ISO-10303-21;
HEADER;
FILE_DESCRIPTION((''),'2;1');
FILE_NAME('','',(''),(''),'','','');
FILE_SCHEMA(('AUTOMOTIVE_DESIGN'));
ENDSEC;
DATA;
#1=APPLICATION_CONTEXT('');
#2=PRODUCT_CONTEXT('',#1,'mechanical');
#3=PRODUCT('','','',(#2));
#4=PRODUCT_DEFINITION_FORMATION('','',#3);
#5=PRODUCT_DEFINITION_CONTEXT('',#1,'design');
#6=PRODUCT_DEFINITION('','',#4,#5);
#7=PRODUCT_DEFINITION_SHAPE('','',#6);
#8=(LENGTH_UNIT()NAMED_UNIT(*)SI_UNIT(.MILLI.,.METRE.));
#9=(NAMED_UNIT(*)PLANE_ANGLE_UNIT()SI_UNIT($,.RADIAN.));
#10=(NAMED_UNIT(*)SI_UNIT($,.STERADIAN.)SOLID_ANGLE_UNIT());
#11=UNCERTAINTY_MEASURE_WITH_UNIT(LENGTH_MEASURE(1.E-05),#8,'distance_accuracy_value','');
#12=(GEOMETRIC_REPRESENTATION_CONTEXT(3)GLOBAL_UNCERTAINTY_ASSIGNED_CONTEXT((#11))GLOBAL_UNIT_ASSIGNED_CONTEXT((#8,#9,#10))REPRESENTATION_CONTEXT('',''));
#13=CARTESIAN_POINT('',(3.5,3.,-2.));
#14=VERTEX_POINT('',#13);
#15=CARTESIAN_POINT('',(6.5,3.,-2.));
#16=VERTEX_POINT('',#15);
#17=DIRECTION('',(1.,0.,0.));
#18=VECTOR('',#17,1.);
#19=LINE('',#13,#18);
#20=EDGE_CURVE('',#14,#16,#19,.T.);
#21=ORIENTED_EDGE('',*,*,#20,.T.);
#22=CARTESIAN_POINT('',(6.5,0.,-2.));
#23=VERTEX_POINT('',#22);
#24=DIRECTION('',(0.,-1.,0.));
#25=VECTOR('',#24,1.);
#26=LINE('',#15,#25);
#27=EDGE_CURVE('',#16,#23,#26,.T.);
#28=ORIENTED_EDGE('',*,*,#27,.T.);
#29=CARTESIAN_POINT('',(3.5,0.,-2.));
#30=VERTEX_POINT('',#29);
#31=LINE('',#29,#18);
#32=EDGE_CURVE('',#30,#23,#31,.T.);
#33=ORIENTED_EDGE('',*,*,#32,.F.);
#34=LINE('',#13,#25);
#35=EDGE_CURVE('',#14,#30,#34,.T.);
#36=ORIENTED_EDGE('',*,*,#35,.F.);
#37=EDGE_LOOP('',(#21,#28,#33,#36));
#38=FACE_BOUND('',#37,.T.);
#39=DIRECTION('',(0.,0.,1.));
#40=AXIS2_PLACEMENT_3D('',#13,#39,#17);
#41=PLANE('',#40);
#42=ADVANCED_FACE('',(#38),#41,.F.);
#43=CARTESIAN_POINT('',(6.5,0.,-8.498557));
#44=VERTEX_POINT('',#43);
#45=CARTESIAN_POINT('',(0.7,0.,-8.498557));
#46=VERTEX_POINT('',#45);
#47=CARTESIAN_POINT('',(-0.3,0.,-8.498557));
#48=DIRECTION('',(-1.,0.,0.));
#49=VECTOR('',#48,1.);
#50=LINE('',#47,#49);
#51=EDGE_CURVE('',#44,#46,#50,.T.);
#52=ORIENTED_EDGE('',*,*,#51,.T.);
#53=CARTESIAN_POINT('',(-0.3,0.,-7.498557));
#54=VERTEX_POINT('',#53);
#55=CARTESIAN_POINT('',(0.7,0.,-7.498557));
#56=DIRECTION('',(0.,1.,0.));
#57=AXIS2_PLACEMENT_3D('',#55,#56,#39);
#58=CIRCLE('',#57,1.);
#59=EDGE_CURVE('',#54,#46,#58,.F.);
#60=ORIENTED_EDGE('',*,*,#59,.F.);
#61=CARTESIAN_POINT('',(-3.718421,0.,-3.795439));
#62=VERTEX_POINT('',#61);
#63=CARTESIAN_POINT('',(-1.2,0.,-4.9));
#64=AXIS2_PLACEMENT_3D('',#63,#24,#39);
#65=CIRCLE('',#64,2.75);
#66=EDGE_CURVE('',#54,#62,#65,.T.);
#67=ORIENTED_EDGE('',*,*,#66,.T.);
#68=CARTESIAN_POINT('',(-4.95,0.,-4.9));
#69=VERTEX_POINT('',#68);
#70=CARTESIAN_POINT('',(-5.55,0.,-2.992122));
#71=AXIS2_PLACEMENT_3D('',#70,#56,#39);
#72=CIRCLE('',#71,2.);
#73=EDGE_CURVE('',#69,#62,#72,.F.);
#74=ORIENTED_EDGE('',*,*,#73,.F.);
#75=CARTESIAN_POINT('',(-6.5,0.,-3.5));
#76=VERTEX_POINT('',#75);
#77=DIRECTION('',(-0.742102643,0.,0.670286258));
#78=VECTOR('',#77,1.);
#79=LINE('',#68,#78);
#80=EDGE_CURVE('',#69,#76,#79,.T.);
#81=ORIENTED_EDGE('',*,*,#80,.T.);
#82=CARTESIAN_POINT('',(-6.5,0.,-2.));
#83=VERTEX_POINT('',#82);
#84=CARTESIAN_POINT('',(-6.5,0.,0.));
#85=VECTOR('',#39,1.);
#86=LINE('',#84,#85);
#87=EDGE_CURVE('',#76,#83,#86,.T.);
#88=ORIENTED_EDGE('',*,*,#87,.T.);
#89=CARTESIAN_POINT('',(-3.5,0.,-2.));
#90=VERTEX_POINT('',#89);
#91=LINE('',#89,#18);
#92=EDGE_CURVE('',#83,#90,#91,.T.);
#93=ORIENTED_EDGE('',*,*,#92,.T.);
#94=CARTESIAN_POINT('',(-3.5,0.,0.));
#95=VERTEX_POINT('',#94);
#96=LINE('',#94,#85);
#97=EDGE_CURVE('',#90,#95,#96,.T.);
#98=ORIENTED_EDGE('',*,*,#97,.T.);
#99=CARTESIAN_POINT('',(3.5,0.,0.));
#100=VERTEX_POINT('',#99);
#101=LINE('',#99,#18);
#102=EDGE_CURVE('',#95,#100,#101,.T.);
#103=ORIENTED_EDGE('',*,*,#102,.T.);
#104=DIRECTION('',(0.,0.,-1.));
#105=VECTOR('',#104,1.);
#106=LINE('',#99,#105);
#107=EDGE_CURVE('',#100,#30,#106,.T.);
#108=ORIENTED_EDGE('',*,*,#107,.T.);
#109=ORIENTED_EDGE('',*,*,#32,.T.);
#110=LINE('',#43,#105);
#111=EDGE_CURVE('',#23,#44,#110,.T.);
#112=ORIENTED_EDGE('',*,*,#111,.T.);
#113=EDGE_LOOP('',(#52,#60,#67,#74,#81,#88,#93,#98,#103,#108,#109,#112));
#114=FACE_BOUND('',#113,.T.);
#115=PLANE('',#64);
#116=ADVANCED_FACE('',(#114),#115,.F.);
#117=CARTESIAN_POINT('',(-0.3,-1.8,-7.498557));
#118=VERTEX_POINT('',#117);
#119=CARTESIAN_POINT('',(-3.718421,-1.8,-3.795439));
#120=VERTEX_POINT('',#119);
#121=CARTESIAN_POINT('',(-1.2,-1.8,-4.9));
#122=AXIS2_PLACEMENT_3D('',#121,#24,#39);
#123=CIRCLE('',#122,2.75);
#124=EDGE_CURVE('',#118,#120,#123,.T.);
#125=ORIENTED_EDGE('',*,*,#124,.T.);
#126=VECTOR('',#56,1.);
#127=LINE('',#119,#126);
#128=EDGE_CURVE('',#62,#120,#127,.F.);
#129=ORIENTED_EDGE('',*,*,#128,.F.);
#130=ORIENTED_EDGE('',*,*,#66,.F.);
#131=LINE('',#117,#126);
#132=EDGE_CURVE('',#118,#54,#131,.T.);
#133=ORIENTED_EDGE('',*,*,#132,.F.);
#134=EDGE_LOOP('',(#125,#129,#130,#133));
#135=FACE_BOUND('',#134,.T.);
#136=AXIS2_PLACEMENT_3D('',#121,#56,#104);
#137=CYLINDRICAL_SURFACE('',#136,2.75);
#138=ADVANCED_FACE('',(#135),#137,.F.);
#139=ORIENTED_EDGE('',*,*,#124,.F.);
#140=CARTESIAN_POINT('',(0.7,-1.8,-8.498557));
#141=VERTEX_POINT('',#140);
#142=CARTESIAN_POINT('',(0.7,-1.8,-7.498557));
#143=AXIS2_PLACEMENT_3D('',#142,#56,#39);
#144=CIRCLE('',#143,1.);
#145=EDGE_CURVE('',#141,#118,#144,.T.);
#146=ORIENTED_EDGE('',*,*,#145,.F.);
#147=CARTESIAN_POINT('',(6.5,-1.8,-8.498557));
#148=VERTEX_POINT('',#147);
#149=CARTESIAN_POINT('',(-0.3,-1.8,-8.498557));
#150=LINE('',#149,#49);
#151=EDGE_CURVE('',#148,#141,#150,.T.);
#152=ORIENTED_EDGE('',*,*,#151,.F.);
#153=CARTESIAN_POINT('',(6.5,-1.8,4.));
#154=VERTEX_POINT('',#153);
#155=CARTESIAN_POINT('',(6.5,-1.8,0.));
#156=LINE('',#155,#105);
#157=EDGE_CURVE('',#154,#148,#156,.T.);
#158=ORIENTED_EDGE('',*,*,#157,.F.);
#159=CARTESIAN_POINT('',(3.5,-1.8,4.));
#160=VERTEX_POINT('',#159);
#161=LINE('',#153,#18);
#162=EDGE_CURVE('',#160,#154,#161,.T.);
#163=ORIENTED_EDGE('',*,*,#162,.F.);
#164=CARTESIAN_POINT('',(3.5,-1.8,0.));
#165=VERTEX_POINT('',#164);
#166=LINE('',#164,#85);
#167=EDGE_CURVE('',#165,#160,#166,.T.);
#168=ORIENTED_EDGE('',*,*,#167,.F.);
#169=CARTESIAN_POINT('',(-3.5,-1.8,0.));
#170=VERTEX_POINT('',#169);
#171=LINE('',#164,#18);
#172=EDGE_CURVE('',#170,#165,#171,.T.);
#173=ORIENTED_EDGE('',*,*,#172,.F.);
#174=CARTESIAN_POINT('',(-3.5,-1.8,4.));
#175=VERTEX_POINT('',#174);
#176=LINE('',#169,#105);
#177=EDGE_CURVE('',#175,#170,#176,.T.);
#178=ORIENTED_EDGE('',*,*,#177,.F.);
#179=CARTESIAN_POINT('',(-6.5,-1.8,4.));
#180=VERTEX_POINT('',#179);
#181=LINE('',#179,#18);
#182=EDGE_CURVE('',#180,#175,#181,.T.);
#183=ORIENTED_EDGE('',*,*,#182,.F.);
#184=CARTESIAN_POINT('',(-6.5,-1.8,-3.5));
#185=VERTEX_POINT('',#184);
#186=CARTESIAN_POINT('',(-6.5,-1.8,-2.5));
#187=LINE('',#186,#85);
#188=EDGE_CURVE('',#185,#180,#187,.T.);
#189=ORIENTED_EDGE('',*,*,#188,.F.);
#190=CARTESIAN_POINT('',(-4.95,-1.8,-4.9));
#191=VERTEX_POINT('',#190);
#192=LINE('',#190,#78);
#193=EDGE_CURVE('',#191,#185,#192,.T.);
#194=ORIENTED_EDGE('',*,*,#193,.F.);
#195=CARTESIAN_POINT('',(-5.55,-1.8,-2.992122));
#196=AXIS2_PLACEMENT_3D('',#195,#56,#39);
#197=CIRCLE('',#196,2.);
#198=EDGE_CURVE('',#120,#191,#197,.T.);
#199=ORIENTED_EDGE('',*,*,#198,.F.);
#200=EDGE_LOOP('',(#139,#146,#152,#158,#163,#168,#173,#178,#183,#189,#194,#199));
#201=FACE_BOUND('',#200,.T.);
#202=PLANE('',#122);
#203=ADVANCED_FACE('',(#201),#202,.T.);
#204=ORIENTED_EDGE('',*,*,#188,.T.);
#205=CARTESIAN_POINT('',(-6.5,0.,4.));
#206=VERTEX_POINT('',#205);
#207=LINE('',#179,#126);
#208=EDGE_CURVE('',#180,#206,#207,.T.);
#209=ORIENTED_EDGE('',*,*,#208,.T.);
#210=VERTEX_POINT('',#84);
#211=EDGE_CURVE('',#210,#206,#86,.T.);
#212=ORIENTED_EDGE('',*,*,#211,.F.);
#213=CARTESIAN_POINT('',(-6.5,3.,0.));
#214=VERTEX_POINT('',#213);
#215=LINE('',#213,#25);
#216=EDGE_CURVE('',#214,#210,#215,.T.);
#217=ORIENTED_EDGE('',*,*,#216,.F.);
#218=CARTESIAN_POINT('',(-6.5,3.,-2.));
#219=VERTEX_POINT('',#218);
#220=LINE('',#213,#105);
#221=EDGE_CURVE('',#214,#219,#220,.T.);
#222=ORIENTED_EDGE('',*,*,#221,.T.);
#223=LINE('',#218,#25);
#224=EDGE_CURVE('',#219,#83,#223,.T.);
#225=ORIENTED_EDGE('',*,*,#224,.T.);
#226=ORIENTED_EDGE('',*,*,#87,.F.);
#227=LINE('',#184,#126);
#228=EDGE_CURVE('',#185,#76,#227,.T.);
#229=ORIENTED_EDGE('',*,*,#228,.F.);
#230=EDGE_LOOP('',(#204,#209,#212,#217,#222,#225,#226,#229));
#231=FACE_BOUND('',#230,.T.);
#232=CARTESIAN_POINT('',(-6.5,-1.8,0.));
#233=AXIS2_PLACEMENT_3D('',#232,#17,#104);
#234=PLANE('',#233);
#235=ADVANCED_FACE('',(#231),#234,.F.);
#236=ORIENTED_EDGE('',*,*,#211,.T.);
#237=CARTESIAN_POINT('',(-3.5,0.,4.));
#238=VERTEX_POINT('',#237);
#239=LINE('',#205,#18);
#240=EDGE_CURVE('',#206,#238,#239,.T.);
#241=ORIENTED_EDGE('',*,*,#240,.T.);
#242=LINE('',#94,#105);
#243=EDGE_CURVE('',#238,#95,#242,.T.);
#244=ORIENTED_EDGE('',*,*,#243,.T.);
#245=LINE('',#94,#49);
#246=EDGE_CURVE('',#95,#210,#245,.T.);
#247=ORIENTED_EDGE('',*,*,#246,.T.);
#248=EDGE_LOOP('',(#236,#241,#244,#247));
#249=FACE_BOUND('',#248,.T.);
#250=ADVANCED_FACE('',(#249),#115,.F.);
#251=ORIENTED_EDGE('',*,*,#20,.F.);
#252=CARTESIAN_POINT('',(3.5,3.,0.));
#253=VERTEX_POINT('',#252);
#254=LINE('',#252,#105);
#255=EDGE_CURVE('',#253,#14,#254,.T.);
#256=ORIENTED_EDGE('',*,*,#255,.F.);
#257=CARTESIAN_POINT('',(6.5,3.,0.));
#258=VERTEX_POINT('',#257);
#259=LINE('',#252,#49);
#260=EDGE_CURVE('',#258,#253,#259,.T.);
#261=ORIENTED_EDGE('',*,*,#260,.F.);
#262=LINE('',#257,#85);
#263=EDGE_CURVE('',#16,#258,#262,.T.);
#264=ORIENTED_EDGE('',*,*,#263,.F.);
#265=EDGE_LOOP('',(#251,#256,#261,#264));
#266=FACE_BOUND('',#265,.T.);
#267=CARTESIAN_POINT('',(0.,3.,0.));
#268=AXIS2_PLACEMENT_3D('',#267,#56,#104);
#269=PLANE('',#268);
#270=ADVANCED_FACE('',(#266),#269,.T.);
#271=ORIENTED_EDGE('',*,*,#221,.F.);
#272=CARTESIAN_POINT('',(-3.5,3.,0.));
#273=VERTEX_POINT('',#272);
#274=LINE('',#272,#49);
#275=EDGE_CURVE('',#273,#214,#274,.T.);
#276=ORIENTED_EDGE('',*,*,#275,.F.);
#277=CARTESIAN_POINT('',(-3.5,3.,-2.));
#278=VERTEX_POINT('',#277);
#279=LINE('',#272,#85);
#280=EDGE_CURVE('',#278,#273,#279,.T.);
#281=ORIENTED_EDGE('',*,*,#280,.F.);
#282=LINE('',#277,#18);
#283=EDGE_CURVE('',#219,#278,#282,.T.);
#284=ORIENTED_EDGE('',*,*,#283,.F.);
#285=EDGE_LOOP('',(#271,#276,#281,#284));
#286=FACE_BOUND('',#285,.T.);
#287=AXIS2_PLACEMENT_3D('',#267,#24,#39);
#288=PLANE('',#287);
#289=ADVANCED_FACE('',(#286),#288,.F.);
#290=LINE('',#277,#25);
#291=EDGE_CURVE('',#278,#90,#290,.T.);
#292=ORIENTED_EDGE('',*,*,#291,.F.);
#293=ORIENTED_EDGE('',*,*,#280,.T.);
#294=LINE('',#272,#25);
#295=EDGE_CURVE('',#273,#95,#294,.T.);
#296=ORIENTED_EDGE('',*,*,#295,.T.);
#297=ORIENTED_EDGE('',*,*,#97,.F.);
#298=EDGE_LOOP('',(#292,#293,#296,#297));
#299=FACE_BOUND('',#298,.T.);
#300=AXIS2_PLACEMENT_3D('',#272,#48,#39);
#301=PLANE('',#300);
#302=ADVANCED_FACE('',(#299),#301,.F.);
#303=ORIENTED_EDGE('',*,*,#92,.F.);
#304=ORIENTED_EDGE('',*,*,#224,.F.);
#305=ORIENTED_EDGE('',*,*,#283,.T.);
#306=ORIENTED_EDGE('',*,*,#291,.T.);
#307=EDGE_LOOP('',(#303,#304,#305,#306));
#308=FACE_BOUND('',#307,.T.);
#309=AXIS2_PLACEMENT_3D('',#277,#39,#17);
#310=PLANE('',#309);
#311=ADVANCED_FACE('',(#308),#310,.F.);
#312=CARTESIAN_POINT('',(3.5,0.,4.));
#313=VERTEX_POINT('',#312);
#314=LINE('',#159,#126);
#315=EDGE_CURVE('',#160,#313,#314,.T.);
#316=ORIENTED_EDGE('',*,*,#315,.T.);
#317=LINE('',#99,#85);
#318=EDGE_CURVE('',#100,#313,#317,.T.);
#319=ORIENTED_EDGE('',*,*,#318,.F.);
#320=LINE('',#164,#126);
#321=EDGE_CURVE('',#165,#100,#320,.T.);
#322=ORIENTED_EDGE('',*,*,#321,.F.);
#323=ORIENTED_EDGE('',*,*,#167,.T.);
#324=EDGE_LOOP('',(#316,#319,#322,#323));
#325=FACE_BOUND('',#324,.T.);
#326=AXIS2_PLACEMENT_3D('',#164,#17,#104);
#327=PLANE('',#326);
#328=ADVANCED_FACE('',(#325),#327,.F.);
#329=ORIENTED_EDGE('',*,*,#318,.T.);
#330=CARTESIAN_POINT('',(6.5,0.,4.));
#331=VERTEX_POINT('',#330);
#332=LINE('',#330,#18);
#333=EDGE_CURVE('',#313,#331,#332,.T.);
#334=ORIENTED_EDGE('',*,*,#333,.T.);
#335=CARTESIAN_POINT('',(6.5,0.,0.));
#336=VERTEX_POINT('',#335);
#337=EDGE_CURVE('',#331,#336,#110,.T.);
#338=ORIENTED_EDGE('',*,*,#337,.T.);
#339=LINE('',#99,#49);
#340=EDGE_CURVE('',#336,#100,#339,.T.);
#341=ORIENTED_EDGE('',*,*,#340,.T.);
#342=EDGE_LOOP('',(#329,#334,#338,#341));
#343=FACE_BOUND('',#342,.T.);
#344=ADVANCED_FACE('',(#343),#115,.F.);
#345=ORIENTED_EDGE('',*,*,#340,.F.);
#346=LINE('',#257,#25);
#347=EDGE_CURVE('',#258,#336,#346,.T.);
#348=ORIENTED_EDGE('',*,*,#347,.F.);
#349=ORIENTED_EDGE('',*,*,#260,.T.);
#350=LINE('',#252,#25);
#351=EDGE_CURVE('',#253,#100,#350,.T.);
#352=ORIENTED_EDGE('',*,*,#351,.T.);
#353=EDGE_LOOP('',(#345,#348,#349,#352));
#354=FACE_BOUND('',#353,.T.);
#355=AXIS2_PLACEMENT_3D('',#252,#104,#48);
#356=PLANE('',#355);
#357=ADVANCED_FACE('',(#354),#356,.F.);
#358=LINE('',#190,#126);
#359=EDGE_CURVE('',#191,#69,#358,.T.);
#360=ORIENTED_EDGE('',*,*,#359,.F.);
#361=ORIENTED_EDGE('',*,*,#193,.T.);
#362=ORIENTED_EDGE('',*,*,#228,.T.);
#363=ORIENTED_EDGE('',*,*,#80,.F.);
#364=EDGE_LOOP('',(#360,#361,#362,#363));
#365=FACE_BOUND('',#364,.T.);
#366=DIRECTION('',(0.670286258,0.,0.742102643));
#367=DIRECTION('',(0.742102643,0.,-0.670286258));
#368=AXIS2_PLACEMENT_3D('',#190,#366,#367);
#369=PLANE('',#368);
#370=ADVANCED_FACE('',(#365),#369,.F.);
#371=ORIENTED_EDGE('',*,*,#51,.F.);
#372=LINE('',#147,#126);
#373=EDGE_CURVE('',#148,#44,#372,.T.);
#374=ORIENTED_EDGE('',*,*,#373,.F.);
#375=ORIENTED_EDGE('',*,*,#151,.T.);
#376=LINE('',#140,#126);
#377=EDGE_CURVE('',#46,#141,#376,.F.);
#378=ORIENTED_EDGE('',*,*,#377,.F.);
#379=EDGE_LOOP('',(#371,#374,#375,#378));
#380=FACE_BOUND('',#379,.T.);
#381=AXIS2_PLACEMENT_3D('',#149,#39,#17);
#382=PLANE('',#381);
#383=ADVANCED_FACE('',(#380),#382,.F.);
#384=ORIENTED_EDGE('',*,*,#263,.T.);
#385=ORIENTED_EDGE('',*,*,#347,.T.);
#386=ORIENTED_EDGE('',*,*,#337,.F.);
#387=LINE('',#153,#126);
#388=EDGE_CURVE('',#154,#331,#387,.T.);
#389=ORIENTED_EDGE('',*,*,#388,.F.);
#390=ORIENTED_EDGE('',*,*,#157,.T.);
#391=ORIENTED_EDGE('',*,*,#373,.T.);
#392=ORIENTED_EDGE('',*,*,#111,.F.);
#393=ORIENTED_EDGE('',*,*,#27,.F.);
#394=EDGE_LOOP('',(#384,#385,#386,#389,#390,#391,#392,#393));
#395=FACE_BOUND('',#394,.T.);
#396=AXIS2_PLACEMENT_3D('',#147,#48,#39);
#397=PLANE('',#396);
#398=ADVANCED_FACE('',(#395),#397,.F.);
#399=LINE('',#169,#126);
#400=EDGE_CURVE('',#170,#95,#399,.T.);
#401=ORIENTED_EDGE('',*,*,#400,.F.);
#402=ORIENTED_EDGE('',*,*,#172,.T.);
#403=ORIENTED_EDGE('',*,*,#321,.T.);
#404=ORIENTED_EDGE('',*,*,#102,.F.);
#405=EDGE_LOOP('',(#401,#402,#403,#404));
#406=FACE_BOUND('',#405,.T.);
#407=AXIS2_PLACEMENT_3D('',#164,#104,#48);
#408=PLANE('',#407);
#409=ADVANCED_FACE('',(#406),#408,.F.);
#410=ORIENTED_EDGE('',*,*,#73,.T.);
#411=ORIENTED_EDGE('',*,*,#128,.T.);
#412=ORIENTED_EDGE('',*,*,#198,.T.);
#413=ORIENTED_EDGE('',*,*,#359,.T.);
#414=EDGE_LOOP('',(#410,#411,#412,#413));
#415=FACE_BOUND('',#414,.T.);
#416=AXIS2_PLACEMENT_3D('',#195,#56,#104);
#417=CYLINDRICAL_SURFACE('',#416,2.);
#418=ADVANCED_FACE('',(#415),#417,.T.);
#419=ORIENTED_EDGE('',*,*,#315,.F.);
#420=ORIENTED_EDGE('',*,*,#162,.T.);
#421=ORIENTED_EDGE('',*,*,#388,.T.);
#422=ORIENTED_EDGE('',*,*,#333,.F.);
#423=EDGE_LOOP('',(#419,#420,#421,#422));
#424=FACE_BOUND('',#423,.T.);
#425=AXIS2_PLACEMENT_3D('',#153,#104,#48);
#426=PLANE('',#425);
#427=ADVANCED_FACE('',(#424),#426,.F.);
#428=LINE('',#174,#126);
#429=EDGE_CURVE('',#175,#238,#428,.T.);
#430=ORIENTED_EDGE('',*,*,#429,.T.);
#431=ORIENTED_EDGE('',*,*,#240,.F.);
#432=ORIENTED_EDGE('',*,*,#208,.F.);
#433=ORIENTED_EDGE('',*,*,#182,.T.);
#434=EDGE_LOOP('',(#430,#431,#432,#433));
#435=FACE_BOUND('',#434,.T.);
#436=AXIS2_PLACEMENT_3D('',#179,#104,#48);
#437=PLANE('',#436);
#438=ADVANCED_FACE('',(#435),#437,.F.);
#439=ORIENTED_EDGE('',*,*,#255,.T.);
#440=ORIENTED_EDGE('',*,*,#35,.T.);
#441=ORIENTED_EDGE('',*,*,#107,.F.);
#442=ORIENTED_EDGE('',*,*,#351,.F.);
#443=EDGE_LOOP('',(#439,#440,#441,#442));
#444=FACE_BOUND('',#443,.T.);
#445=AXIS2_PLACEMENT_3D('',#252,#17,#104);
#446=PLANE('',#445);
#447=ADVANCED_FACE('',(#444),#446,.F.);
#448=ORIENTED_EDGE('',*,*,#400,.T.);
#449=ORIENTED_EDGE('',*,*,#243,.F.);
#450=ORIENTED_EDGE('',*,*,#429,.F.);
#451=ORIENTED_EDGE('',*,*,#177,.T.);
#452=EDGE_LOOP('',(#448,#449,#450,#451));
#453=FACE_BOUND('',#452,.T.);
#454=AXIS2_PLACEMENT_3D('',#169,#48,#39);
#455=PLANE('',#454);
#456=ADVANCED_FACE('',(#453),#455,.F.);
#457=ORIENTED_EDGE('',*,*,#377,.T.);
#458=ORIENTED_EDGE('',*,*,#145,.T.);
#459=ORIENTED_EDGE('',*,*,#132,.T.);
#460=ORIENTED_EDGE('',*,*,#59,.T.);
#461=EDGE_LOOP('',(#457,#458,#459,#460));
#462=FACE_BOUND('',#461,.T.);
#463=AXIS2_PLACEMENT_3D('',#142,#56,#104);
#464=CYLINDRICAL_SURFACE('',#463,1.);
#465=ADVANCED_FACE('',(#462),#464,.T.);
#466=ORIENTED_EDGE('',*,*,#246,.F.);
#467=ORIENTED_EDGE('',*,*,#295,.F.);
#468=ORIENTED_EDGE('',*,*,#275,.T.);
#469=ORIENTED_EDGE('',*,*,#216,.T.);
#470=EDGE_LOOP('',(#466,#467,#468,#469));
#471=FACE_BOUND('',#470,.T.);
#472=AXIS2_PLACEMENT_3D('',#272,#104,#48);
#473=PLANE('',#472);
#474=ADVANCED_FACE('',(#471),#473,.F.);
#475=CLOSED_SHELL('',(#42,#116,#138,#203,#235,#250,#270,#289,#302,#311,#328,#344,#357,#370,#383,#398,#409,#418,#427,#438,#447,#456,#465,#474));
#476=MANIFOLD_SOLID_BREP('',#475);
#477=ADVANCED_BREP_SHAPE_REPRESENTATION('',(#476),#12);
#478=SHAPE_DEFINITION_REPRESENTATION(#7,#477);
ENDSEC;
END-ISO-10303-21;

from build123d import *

# Parameters (mm, degrees)
BOSS_EXTRUDE1_DEPTH = 1.8
FILLET1_R           = 2
FILLET3_R           = 1
SKETCH2_W           = 3
SKETCH2_H           = 2
BOSS_EXTRUDE2_DEPTH = 3


# Some blends are built 0.0001 mm under size
with BuildPart() as part:
    # Sketch1 → Boss-Extrude1 (new body)
    with BuildSketch(Plane(origin=(0, 0, 0), x_dir=(1, 0, 0), z_dir=(0, 1, 0))):
        with BuildLine():
            Line((6.5, 2.5), (6.5, 0))
            Line((6.5, 0), (6.5, -4))
            Line((6.5, -4), (3.5, -4))
            Line((3.5, -4), (3.5, 0))
            Line((3.5, 0), (-3.5, 0))
            Line((-3.5, 0), (-3.5, -4))
            Line((-3.5, -4), (-6.5, -4))
            Line((-6.5, -4), (-6.5, 0))
            Line((-6.5, 0), (-6.5, 2.5))
            Line((-6.5, 2.5), (-6.5, 3.5))
            Line((-6.5, 3.5), (-4.95, 4.9))
            Line((-4.95, 4.9), (-3.95, 4.9))
            ThreePointArc((-3.95, 4.9), (-1.2, 2.15), (1.55, 4.9))
            ThreePointArc((1.55, 4.9), (1.040256682, 6.494913791), (-0.3, 7.498557292))
            Line((-0.3, 7.498557292), (-0.3, 8.498557292))
            Line((-0.3, 8.498557292), (6.5, 8.498557292))
            Line((6.5, 8.498557292), (6.5, 4.9))
            Line((6.5, 4.9), (6.5, 2.5))
        make_face()
    extrude(amount=BOSS_EXTRUDE1_DEPTH)

    # Fillet1
    # the kernel refuses this fillet: 2 mm, written as the material it takes off along each edge
    with BuildSketch(Plane(origin=(-3.95, -2.821440468, -4.9), x_dir=(0.20519567041703113, 0, 0.9787209698591858), z_dir=(0, 1, 0))) as fillet1_piece_1:
        with BuildLine():
            CenterArc((1.538967528, -1.95744194), FILLET1_R, 101.840953646, 48.860489585)
            Line((-0.20519567, -0.97872097), (-0.240078934, -0.95914655))
            ThreePointArc((-0.240078934, -0.95914655), (-0.141746674, -0.481152658), (-0.039148839, 0.008207827))
            Line((-0.039148839, 0.008207827), (0.008207827, 0.039148839))
            ThreePointArc((0.008207827, 0.039148839), (0.564288094, -0.018517333), (1.12036836, 0.039148839))
            Line((1.12036836, 0.039148839), (1.128576187, 0))
        make_face()
    extrude(amount=7.442880936, mode=Mode.SUBTRACT)

    # Fillet3
    fillet3_edges = [part.edges().sort_by_distance(p)[0] for p in [
        (-0.3, 0.9, -8.498557292),
    ]]
    fillet(fillet3_edges, radius=FILLET3_R - 0.0001)  # a hair under: the kernel refuses the full size

    # Sketch2 → Boss-Extrude2 (add)
    with BuildSketch(Plane.XZ):
        with Locations((5, -1)):
            Rectangle(SKETCH2_W, SKETCH2_H)
        with Locations((-5, -1)):
            Rectangle(SKETCH2_W, SKETCH2_H)
    extrude(amount=BOSS_EXTRUDE2_DEPTH)


with BuildPart() as body_2:
    # Mirror3: mirrored copy
    add(part.part.mirror(Plane(origin=(0, 0, 0), x_dir=(0, 0, 1), z_dir=(0, -1, 0))))


solid = body_2.part
